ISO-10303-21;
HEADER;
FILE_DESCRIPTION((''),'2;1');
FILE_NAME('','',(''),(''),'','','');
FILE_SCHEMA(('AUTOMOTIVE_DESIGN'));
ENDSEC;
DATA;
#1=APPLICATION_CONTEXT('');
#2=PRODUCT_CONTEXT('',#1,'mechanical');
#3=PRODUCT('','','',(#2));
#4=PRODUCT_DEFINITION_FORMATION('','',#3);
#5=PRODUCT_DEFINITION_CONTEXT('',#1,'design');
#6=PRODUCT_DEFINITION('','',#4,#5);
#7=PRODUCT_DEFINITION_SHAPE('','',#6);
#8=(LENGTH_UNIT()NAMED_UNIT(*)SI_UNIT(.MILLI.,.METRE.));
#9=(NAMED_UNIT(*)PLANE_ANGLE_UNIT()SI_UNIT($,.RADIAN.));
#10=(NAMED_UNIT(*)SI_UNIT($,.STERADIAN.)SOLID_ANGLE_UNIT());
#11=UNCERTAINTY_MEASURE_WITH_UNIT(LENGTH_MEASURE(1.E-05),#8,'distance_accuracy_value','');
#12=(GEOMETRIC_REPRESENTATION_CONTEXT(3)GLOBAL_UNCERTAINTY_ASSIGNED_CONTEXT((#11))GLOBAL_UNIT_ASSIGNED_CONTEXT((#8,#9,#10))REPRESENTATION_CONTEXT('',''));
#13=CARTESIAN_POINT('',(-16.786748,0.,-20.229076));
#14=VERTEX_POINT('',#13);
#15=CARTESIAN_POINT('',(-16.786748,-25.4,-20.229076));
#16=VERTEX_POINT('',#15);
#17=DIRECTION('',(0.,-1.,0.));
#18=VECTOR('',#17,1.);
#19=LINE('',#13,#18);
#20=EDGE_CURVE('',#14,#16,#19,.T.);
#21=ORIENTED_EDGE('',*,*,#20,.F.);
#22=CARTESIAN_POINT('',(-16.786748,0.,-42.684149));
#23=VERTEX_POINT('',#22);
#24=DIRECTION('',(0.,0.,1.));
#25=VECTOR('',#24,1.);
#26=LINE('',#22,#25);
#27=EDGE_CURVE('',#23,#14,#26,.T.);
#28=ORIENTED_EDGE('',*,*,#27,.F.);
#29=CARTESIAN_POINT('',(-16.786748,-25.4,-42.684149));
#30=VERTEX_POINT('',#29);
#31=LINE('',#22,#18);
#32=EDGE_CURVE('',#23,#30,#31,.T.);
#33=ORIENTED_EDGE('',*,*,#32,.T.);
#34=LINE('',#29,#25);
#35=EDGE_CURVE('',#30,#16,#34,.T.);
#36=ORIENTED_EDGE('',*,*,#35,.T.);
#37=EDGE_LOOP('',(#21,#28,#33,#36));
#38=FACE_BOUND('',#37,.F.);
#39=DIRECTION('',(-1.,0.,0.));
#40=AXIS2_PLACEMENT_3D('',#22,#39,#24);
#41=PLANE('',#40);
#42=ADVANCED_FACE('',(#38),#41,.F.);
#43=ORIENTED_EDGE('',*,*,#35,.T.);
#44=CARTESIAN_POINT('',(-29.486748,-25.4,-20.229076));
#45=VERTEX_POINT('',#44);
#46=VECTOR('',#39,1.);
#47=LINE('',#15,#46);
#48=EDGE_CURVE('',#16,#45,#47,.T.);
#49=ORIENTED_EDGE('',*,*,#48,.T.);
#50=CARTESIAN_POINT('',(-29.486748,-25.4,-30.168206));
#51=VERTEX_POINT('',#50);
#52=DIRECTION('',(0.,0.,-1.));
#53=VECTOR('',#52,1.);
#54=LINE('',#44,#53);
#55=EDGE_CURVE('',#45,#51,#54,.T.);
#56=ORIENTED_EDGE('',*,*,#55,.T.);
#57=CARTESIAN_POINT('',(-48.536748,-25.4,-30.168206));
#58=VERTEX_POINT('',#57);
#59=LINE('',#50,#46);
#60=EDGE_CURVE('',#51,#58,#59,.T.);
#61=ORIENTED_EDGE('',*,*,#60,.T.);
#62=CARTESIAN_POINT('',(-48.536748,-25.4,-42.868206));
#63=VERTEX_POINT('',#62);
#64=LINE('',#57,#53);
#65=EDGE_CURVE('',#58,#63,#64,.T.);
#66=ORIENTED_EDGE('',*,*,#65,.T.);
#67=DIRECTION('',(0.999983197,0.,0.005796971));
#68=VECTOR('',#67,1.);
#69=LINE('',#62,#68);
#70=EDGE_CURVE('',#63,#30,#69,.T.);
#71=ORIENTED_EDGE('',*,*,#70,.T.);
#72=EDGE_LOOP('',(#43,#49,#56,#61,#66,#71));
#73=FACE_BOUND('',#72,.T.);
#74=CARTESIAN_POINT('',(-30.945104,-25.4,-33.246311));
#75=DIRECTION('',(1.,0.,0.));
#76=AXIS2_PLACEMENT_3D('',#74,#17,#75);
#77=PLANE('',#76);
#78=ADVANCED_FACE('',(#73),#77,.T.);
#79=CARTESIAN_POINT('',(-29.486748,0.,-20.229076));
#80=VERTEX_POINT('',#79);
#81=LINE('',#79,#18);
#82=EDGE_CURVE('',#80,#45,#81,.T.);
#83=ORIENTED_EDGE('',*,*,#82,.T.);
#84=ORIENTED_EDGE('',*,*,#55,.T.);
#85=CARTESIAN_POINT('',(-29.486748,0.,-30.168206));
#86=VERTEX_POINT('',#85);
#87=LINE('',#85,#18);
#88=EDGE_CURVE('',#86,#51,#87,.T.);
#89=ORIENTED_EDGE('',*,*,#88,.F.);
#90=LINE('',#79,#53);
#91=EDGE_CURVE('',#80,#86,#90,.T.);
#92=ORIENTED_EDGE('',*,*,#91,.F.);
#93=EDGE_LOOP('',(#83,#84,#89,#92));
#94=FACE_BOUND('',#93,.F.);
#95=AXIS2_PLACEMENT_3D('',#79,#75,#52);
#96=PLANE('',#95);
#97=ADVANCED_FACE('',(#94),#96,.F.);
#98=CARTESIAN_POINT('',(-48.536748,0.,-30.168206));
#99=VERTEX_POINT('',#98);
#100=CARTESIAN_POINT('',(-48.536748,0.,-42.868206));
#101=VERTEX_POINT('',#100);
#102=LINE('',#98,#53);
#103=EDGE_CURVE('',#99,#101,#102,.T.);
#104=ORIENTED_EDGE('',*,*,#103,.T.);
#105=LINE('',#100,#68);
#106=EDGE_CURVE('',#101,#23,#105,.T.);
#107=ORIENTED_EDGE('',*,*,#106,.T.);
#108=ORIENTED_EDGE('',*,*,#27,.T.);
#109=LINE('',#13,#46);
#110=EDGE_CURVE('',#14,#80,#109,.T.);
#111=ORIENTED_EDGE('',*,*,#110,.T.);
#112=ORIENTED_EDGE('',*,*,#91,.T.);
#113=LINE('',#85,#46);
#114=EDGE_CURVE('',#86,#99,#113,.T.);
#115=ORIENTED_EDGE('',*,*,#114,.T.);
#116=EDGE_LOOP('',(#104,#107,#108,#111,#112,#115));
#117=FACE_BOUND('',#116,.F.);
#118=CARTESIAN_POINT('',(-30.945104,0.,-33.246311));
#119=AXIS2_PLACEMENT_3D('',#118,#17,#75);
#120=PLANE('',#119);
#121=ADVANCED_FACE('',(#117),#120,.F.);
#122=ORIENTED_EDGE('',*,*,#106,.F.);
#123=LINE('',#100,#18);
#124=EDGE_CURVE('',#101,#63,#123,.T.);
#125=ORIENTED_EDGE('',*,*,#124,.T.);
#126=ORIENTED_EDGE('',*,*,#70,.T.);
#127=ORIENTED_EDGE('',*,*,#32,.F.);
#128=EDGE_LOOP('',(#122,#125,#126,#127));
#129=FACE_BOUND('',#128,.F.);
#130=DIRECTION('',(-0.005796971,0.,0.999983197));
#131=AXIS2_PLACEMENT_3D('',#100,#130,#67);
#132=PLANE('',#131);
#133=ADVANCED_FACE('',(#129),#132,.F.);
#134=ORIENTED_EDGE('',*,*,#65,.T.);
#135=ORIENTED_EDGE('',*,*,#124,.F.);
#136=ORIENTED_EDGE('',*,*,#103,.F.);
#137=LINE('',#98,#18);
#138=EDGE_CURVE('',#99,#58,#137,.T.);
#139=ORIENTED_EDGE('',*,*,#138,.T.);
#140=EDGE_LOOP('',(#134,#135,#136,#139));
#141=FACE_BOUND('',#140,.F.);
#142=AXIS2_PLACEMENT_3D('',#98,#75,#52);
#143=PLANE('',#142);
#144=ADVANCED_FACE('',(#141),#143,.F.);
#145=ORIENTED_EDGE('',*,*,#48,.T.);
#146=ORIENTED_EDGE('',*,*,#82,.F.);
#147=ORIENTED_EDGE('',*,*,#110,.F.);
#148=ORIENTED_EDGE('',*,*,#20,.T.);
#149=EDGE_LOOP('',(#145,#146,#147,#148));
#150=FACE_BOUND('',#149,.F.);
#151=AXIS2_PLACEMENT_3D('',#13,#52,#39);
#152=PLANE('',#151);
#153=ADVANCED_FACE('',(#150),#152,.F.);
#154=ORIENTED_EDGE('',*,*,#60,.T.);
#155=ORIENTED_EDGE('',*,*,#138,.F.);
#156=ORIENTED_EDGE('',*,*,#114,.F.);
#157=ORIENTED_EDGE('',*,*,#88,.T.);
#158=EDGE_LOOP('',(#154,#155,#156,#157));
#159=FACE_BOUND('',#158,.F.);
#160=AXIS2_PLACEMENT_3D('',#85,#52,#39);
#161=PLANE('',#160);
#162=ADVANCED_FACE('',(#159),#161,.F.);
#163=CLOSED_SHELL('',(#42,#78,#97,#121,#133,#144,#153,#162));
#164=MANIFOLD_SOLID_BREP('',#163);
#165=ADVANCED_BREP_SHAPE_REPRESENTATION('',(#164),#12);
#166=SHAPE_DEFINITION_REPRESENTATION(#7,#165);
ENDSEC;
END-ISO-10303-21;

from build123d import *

# Parameters (mm, degrees)
F1_DEPTH = 25.4


# Not quite as in the source:
# - a feature names something its author has since deleted; it is built from what else it names


with BuildPart() as f1:
    # F0 (on Front) → F1 (new body)
    with BuildSketch(Plane.XZ):
        Polygon((-48.536748241, -30.1682058325), (-48.536748241, -42.8682058325), (-16.786748241, -42.6841488952), (-16.786748241, -20.229075549), (-29.486748241, -20.229075549), (-29.486748241, -30.1682058325), align=None)
    extrude(amount=F1_DEPTH)


solid = f1.part
